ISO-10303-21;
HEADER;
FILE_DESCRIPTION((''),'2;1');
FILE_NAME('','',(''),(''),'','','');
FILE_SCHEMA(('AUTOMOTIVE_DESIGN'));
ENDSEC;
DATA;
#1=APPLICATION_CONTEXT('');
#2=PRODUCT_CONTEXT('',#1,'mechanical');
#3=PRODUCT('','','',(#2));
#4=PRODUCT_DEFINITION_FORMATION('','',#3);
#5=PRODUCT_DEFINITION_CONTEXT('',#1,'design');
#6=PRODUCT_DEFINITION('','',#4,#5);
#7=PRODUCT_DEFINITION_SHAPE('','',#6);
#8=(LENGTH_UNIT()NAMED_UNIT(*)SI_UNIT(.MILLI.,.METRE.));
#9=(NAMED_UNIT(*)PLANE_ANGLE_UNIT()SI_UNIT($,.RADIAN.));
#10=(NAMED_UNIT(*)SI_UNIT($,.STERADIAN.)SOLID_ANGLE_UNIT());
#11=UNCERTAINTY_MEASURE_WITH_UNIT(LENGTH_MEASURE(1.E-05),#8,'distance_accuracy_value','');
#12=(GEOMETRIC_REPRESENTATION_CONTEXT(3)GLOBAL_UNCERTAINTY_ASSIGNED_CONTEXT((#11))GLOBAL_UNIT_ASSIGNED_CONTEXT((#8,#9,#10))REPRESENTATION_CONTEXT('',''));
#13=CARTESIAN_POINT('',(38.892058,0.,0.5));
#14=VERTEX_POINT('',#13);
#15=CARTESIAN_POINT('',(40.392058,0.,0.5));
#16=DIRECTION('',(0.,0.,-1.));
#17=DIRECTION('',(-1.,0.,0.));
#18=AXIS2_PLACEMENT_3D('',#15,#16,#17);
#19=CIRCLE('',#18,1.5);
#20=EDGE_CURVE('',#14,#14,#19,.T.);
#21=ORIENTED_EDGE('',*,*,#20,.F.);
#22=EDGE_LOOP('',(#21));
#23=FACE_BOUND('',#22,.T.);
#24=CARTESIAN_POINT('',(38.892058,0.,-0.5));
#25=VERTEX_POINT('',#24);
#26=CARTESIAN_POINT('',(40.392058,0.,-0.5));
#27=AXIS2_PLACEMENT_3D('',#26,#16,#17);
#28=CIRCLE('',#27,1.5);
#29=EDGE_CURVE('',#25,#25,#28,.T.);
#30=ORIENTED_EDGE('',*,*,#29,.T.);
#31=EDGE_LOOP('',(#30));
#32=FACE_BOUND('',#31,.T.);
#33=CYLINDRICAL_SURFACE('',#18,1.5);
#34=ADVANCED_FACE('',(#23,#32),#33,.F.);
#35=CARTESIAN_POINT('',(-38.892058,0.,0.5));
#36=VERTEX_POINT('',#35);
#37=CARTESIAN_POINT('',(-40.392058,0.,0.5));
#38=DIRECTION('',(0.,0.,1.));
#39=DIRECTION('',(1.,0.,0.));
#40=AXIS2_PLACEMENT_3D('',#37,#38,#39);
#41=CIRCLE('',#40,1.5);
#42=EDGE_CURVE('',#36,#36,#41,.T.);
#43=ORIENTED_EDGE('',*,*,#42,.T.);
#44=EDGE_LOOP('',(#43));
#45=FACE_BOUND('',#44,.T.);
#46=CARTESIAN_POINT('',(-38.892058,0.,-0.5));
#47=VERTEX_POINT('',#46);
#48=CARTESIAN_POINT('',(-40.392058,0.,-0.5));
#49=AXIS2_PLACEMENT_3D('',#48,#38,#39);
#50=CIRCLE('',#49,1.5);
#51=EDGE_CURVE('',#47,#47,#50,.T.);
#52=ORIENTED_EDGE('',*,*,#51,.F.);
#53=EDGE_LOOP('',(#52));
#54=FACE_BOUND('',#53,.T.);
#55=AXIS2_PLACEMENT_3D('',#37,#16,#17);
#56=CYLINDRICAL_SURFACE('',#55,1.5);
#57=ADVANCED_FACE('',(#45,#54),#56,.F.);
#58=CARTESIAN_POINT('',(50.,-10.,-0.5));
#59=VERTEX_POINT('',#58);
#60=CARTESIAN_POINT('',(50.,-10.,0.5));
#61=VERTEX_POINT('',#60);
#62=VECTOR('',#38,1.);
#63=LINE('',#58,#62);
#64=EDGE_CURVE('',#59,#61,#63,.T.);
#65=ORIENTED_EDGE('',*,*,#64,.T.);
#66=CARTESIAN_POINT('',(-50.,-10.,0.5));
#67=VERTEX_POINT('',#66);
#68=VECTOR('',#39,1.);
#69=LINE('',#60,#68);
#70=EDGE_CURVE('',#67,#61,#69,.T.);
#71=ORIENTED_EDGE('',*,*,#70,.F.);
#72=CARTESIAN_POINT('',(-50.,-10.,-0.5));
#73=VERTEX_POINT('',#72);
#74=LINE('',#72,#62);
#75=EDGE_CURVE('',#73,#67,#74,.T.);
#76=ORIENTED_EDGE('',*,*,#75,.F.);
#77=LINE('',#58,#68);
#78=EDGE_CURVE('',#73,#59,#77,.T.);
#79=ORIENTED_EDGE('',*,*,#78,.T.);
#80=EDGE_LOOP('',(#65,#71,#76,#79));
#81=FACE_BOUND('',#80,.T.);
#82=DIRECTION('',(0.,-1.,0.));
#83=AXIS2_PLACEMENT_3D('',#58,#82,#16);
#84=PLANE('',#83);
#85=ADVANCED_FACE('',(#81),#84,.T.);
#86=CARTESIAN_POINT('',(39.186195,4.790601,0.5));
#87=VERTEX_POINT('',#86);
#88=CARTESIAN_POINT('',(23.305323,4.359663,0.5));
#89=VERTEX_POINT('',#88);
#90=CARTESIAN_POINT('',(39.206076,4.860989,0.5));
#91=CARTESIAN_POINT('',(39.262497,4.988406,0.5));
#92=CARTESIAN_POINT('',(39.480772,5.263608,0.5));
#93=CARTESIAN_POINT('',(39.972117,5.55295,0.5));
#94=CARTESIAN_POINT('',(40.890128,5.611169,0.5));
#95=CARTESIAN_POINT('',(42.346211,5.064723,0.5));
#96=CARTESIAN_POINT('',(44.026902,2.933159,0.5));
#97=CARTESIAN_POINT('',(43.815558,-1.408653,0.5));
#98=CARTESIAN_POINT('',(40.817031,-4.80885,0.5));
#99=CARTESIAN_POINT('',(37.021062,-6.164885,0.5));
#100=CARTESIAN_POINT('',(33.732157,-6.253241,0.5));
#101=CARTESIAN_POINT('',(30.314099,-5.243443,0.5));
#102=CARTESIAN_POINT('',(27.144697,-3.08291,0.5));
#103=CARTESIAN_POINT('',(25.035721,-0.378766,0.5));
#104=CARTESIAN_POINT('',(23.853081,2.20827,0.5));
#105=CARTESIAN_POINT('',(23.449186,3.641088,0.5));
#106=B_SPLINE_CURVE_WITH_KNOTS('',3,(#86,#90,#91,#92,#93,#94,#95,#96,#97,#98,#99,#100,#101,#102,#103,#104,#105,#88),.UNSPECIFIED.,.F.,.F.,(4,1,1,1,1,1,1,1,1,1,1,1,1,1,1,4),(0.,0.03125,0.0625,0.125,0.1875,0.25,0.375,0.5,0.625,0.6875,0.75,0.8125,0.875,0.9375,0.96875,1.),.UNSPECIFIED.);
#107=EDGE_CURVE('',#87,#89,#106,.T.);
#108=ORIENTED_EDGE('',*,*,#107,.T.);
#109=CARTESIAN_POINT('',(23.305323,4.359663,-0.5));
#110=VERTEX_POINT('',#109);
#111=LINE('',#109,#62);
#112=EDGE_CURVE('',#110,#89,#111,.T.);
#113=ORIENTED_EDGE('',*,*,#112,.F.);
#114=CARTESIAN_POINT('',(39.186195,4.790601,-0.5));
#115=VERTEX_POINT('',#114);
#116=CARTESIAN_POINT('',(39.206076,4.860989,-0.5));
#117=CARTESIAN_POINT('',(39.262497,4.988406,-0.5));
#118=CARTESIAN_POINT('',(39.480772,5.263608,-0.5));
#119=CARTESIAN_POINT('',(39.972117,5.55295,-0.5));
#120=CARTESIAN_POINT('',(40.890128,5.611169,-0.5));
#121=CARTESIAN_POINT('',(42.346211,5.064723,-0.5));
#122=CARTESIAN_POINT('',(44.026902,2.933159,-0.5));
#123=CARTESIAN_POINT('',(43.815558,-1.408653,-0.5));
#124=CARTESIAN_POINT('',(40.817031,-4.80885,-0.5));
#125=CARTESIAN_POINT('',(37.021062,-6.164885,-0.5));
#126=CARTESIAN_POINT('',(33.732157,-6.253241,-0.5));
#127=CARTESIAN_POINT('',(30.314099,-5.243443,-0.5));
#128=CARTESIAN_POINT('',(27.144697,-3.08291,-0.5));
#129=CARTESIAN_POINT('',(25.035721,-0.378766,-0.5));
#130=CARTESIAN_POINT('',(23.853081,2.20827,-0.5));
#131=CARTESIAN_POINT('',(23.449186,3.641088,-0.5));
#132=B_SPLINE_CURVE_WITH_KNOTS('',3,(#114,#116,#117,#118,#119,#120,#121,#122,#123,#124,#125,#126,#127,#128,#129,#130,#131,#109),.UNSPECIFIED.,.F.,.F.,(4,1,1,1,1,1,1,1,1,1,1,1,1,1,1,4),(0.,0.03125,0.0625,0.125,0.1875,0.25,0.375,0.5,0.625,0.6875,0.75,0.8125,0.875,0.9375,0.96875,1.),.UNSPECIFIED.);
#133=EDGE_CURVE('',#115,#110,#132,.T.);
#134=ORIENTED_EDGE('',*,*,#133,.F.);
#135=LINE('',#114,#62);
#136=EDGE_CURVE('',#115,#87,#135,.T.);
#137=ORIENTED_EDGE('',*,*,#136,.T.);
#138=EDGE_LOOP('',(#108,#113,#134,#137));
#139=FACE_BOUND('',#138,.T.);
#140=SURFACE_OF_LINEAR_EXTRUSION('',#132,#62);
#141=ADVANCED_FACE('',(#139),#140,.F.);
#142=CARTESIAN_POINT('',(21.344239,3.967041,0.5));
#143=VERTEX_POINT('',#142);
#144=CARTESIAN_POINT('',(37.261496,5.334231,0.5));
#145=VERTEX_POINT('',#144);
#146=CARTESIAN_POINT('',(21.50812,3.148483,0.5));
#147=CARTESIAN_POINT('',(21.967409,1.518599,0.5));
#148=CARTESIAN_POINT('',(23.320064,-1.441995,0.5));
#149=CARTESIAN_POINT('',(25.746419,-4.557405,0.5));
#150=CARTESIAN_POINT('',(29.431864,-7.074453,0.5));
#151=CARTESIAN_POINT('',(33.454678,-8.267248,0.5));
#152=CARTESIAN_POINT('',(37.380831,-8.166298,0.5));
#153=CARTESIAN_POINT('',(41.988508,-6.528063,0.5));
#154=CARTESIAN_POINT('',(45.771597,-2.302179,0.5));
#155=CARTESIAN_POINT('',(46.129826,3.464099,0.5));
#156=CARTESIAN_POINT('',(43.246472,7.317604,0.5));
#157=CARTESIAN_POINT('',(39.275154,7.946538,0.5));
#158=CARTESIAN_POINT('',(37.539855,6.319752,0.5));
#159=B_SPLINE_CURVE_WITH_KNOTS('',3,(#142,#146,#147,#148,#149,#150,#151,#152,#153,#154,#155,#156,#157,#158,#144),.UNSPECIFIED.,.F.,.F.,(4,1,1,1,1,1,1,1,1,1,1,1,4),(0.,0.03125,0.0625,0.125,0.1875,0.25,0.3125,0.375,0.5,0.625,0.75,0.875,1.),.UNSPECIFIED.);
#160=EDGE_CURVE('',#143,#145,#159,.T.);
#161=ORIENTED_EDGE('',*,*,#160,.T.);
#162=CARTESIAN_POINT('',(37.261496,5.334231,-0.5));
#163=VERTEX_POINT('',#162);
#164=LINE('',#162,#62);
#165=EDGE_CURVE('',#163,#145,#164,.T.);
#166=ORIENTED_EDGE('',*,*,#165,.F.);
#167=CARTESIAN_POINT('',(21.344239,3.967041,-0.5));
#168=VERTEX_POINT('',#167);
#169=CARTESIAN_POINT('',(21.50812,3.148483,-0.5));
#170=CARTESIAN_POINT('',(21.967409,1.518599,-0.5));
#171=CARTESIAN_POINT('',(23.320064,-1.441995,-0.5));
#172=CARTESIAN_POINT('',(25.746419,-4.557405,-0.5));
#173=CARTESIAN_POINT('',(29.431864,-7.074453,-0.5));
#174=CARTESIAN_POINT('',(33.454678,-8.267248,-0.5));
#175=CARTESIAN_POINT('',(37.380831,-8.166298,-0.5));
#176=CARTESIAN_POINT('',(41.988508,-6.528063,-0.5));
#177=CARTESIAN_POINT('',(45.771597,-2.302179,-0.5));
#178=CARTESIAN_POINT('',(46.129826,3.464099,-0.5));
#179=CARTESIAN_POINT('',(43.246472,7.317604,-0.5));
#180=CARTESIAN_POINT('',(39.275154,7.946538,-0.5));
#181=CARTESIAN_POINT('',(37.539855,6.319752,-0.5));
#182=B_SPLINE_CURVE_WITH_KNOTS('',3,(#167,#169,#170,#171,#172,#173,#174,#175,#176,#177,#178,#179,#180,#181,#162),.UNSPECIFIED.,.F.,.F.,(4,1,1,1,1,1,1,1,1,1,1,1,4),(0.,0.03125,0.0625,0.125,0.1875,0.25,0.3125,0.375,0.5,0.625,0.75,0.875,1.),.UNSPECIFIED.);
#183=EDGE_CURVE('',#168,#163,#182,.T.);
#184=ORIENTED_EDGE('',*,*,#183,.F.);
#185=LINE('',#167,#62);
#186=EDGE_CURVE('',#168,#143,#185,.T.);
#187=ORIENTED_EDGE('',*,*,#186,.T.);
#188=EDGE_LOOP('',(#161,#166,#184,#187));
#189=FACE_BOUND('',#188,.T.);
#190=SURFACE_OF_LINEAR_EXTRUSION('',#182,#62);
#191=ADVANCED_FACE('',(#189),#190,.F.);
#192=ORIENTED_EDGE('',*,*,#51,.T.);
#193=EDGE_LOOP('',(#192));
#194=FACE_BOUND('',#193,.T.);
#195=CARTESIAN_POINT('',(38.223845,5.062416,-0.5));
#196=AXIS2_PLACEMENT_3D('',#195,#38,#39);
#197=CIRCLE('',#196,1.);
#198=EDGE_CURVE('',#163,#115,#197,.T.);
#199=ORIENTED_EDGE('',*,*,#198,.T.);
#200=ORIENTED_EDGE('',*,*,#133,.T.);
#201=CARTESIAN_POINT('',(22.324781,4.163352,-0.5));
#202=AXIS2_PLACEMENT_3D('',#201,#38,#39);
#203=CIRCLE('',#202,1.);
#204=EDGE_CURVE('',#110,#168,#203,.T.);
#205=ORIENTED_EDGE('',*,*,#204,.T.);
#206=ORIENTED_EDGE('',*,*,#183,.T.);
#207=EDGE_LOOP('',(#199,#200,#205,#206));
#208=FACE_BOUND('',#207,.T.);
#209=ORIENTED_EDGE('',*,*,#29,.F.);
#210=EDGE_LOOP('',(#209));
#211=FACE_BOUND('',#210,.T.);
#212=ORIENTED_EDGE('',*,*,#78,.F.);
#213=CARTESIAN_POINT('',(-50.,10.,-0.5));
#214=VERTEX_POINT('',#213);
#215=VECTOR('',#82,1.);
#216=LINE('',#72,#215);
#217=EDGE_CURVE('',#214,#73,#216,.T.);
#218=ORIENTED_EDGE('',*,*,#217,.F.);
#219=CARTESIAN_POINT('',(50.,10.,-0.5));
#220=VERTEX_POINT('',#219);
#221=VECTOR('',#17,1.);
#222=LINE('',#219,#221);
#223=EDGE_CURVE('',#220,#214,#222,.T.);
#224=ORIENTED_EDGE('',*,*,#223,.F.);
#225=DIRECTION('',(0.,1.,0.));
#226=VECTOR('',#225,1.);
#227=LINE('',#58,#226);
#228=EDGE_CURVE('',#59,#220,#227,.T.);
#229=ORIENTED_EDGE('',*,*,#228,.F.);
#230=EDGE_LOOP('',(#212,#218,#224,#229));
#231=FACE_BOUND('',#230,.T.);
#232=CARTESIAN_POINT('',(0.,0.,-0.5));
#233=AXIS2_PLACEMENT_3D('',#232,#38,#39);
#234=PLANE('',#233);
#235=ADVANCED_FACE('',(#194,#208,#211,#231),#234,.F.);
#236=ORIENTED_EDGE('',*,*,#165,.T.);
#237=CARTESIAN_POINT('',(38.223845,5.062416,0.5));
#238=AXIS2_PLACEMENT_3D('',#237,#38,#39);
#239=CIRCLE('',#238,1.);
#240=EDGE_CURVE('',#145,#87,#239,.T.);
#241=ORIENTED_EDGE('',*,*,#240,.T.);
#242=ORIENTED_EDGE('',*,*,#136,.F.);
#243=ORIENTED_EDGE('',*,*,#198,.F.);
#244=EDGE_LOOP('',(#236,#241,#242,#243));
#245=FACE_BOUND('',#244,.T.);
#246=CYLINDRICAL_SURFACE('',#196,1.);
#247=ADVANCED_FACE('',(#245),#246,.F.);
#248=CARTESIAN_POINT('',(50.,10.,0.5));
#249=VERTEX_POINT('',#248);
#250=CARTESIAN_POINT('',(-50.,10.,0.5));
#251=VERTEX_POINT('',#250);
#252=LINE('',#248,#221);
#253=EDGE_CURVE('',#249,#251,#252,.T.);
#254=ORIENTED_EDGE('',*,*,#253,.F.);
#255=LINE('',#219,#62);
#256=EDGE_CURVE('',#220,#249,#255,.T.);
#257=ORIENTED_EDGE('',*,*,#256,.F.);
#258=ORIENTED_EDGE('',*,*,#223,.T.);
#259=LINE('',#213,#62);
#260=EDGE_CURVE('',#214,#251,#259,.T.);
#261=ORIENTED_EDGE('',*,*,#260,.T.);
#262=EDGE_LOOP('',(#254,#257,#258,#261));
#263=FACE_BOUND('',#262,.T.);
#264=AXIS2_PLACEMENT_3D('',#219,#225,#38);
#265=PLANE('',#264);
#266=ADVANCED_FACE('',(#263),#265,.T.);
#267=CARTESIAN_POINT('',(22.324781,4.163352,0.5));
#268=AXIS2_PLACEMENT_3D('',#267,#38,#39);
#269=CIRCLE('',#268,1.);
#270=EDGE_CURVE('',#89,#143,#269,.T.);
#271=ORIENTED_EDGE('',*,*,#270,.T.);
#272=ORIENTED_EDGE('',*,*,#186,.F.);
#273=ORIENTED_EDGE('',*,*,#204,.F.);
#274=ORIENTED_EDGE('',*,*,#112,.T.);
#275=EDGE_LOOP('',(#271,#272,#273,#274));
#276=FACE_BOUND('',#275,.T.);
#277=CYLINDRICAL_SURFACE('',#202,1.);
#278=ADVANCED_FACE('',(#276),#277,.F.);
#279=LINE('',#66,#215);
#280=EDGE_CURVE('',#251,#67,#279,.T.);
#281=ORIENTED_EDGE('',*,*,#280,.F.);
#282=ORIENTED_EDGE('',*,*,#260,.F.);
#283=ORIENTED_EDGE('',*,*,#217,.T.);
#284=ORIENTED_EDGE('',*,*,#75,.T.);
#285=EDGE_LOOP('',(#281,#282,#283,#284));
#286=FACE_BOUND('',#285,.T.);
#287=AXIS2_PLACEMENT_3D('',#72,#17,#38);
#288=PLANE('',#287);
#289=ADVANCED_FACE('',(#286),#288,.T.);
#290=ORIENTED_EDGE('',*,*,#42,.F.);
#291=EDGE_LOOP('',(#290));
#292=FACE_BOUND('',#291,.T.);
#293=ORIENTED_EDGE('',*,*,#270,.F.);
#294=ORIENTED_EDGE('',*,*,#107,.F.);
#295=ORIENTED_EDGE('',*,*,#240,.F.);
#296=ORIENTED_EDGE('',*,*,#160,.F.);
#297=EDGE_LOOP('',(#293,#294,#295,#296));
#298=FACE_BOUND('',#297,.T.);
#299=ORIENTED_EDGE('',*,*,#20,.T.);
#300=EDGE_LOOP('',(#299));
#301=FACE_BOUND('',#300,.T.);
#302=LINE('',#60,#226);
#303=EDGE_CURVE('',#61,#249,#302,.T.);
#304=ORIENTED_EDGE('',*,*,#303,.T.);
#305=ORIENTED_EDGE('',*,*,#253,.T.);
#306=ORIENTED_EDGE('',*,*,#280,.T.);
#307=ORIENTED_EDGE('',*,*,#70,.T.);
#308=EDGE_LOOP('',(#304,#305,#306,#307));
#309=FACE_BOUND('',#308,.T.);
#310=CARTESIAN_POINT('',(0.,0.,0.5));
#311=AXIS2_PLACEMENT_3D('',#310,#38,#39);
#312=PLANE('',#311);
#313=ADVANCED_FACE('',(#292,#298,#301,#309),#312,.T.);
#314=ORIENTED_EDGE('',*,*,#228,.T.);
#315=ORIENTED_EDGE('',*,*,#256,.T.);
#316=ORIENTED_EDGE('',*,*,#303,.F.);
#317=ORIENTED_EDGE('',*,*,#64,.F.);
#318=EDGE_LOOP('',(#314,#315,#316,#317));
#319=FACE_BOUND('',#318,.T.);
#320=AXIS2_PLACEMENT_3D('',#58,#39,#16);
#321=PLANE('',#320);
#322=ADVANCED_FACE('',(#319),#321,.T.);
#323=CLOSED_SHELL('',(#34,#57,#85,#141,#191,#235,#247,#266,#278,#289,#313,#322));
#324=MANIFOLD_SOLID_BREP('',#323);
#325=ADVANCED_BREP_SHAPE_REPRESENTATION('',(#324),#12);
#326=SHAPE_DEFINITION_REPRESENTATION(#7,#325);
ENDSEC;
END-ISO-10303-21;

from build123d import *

# Parameters (mm, degrees)
EXTRUDE_1_DEPTH      = 0.5
EXTRUDE_1_DEPTH_BACK = 0.5
SKETCH_1_W           = 100
SKETCH_1_H           = 20
CUT_EXTRUDE_1_DEPTH  = 52
SKETCH_8_R           = 1.5
CUT_EXTRUDE_2_DEPTH  = 52.00000012
SKETCH_9_R           = 1.05
EXTRUDE_2_DEPTH      = 2
OTHER_START          = -2.5
OTHER_2_OUTLINE_R    = 1.05
OTHER_2_DEPTH        = 2


# Read off the part's stored shape, not the designer's step: Пересечение2
with BuildPart() as part:
    # Эскиз1 → Бобышка-Вытянуть1 (new, two sides: drawn at the far end of the back side and taken through both)
    with BuildSketch(Plane.XY.offset(-EXTRUDE_1_DEPTH_BACK)):
        Rectangle(SKETCH_1_W, SKETCH_1_H)
    extrude(amount=EXTRUDE_1_DEPTH + EXTRUDE_1_DEPTH_BACK)

    # Эскиз7 → Вырез-Вытянуть1 (cut, through all)
    with BuildSketch(Plane.XY.offset(0.5)):
        with BuildLine():
            ThreePointArc((37.261495637, 5.33423095), (37.952030231, 4.100066466), (39.186194715, 4.79060106))
            add(Edge.make_bspline(
                [(39.186194715, 4.79060106), (39.206075717, 4.860988923), (39.262496645, 4.988405972), (39.480772307, 5.263607744), (39.972116976, 5.552949613), (40.89012751, 5.611168859), (42.346211172, 5.064723366), (44.026902125, 2.933159087), (43.815557835, -1.408653234), (40.817030581, -4.80884968), (37.021062322, -6.164885186), (33.732157303, -6.253240822), (30.314099065, -5.243442536), (27.144697082, -3.082909818), (25.035720973, -0.378766084), (23.85308145, 2.208270108), (23.449186454, 3.64108751), (23.305322842, 4.359662985)],
                knots=[0, 0, 0, 0, 0.03125, 0.0625, 0.125, 0.1875, 0.25, 0.375, 0.5, 0.625, 0.6875, 0.75, 0.8125, 0.875, 0.9375, 0.96875, 1, 1, 1, 1], degree=3))
            ThreePointArc((23.305322842, 4.359662985), (22.128470162, 5.143893671), (21.344239476, 3.96704099))
            add(Edge.make_bspline(
                [(37.261495637, 5.33423095), (37.539855307, 6.319751815), (39.275153501, 7.946538331), (43.246471825, 7.317604488), (46.129826318, 3.464099405), (45.771597181, -2.30217859), (41.988507816, -6.528062966), (37.380831362, -8.166298308), (33.454677533, -8.267248255), (29.431863805, -7.074452826), (25.746418814, -4.55740521), (23.320064013, -1.441995451), (21.967408891, 1.518598896), (21.5081203, 3.148482776), (21.344239476, 3.96704099)],
                knots=[0, 0, 0, 0, 0.125, 0.25, 0.375, 0.5, 0.625, 0.6875, 0.75, 0.8125, 0.875, 0.9375, 0.96875, 1, 1, 1, 1], degree=3))
        make_face()
    extrude(amount=-CUT_EXTRUDE_1_DEPTH, mode=Mode.SUBTRACT)

    # Эскиз8 → Вырез-Вытянуть2 (cut, through all)
    with BuildSketch(Plane(origin=(0, 0, -0.5), x_dir=(-1, 0, 0), z_dir=(0, 0, -1))):
        with Locations((-40.392058098, 0)):
            Circle(SKETCH_8_R)
    cut_extrude_2 = extrude(amount=-CUT_EXTRUDE_2_DEPTH, mode=Mode.SUBTRACT)

    # Зеркальное отражение1: Вырез-Вытянуть2 across plane
    add(cut_extrude_2.mirror(Plane(origin=(0, 0, 0), x_dir=(0, 0, 1), z_dir=(1, 0, 0))), mode=Mode.SUBTRACT)


with BuildPart() as body_2:
    # Эскиз9 → Бобышка-Вытянуть2 (new body)
    with BuildSketch(Plane(origin=(0, 0, -0.5), x_dir=(-1, 0, 0), z_dir=(0, 0, -1))):
        with BuildLine():
            Line((-38.223845176, 7.062416005), (-136.223845176, 7.062416005))
            Line((-136.223845176, 7.062416005), (-136.223845176, 3.062416005))
            Line((-136.223845176, 3.062416005), (-38.223845176, 3.062416005))
            ThreePointArc((-38.223845176, 3.062416005), (-36.223845176, 5.062416005), (-38.223845176, 7.062416005))
        make_face()
        with Locations((-38.223845176, 5.062416005)):
            Circle(SKETCH_9_R, mode=Mode.SUBTRACT)
    extrude(amount=EXTRUDE_2_DEPTH)

    # Пересечение2 outline → Пересечение2 (cut)
    with BuildSketch(Plane.XY.offset(OTHER_START)):
        with BuildLine():
            Line((136.223845176, 7.062416005), (38.223845176, 7.062416005))
            ThreePointArc((38.223845176, 7.062416005), (36.223845176, 5.062416005), (38.223845176, 3.062416005))
            Line((38.223845176, 3.062416005), (136.223845176, 3.062416005))
            Line((136.223845176, 3.062416005), (136.223845176, 7.062416005))
        make_face()
        with Locations((38.223845176, 5.062416005)):
            Circle(OTHER_2_OUTLINE_R, mode=Mode.SUBTRACT)
    extrude(amount=OTHER_2_DEPTH, mode=Mode.SUBTRACT)


solid = part.part
